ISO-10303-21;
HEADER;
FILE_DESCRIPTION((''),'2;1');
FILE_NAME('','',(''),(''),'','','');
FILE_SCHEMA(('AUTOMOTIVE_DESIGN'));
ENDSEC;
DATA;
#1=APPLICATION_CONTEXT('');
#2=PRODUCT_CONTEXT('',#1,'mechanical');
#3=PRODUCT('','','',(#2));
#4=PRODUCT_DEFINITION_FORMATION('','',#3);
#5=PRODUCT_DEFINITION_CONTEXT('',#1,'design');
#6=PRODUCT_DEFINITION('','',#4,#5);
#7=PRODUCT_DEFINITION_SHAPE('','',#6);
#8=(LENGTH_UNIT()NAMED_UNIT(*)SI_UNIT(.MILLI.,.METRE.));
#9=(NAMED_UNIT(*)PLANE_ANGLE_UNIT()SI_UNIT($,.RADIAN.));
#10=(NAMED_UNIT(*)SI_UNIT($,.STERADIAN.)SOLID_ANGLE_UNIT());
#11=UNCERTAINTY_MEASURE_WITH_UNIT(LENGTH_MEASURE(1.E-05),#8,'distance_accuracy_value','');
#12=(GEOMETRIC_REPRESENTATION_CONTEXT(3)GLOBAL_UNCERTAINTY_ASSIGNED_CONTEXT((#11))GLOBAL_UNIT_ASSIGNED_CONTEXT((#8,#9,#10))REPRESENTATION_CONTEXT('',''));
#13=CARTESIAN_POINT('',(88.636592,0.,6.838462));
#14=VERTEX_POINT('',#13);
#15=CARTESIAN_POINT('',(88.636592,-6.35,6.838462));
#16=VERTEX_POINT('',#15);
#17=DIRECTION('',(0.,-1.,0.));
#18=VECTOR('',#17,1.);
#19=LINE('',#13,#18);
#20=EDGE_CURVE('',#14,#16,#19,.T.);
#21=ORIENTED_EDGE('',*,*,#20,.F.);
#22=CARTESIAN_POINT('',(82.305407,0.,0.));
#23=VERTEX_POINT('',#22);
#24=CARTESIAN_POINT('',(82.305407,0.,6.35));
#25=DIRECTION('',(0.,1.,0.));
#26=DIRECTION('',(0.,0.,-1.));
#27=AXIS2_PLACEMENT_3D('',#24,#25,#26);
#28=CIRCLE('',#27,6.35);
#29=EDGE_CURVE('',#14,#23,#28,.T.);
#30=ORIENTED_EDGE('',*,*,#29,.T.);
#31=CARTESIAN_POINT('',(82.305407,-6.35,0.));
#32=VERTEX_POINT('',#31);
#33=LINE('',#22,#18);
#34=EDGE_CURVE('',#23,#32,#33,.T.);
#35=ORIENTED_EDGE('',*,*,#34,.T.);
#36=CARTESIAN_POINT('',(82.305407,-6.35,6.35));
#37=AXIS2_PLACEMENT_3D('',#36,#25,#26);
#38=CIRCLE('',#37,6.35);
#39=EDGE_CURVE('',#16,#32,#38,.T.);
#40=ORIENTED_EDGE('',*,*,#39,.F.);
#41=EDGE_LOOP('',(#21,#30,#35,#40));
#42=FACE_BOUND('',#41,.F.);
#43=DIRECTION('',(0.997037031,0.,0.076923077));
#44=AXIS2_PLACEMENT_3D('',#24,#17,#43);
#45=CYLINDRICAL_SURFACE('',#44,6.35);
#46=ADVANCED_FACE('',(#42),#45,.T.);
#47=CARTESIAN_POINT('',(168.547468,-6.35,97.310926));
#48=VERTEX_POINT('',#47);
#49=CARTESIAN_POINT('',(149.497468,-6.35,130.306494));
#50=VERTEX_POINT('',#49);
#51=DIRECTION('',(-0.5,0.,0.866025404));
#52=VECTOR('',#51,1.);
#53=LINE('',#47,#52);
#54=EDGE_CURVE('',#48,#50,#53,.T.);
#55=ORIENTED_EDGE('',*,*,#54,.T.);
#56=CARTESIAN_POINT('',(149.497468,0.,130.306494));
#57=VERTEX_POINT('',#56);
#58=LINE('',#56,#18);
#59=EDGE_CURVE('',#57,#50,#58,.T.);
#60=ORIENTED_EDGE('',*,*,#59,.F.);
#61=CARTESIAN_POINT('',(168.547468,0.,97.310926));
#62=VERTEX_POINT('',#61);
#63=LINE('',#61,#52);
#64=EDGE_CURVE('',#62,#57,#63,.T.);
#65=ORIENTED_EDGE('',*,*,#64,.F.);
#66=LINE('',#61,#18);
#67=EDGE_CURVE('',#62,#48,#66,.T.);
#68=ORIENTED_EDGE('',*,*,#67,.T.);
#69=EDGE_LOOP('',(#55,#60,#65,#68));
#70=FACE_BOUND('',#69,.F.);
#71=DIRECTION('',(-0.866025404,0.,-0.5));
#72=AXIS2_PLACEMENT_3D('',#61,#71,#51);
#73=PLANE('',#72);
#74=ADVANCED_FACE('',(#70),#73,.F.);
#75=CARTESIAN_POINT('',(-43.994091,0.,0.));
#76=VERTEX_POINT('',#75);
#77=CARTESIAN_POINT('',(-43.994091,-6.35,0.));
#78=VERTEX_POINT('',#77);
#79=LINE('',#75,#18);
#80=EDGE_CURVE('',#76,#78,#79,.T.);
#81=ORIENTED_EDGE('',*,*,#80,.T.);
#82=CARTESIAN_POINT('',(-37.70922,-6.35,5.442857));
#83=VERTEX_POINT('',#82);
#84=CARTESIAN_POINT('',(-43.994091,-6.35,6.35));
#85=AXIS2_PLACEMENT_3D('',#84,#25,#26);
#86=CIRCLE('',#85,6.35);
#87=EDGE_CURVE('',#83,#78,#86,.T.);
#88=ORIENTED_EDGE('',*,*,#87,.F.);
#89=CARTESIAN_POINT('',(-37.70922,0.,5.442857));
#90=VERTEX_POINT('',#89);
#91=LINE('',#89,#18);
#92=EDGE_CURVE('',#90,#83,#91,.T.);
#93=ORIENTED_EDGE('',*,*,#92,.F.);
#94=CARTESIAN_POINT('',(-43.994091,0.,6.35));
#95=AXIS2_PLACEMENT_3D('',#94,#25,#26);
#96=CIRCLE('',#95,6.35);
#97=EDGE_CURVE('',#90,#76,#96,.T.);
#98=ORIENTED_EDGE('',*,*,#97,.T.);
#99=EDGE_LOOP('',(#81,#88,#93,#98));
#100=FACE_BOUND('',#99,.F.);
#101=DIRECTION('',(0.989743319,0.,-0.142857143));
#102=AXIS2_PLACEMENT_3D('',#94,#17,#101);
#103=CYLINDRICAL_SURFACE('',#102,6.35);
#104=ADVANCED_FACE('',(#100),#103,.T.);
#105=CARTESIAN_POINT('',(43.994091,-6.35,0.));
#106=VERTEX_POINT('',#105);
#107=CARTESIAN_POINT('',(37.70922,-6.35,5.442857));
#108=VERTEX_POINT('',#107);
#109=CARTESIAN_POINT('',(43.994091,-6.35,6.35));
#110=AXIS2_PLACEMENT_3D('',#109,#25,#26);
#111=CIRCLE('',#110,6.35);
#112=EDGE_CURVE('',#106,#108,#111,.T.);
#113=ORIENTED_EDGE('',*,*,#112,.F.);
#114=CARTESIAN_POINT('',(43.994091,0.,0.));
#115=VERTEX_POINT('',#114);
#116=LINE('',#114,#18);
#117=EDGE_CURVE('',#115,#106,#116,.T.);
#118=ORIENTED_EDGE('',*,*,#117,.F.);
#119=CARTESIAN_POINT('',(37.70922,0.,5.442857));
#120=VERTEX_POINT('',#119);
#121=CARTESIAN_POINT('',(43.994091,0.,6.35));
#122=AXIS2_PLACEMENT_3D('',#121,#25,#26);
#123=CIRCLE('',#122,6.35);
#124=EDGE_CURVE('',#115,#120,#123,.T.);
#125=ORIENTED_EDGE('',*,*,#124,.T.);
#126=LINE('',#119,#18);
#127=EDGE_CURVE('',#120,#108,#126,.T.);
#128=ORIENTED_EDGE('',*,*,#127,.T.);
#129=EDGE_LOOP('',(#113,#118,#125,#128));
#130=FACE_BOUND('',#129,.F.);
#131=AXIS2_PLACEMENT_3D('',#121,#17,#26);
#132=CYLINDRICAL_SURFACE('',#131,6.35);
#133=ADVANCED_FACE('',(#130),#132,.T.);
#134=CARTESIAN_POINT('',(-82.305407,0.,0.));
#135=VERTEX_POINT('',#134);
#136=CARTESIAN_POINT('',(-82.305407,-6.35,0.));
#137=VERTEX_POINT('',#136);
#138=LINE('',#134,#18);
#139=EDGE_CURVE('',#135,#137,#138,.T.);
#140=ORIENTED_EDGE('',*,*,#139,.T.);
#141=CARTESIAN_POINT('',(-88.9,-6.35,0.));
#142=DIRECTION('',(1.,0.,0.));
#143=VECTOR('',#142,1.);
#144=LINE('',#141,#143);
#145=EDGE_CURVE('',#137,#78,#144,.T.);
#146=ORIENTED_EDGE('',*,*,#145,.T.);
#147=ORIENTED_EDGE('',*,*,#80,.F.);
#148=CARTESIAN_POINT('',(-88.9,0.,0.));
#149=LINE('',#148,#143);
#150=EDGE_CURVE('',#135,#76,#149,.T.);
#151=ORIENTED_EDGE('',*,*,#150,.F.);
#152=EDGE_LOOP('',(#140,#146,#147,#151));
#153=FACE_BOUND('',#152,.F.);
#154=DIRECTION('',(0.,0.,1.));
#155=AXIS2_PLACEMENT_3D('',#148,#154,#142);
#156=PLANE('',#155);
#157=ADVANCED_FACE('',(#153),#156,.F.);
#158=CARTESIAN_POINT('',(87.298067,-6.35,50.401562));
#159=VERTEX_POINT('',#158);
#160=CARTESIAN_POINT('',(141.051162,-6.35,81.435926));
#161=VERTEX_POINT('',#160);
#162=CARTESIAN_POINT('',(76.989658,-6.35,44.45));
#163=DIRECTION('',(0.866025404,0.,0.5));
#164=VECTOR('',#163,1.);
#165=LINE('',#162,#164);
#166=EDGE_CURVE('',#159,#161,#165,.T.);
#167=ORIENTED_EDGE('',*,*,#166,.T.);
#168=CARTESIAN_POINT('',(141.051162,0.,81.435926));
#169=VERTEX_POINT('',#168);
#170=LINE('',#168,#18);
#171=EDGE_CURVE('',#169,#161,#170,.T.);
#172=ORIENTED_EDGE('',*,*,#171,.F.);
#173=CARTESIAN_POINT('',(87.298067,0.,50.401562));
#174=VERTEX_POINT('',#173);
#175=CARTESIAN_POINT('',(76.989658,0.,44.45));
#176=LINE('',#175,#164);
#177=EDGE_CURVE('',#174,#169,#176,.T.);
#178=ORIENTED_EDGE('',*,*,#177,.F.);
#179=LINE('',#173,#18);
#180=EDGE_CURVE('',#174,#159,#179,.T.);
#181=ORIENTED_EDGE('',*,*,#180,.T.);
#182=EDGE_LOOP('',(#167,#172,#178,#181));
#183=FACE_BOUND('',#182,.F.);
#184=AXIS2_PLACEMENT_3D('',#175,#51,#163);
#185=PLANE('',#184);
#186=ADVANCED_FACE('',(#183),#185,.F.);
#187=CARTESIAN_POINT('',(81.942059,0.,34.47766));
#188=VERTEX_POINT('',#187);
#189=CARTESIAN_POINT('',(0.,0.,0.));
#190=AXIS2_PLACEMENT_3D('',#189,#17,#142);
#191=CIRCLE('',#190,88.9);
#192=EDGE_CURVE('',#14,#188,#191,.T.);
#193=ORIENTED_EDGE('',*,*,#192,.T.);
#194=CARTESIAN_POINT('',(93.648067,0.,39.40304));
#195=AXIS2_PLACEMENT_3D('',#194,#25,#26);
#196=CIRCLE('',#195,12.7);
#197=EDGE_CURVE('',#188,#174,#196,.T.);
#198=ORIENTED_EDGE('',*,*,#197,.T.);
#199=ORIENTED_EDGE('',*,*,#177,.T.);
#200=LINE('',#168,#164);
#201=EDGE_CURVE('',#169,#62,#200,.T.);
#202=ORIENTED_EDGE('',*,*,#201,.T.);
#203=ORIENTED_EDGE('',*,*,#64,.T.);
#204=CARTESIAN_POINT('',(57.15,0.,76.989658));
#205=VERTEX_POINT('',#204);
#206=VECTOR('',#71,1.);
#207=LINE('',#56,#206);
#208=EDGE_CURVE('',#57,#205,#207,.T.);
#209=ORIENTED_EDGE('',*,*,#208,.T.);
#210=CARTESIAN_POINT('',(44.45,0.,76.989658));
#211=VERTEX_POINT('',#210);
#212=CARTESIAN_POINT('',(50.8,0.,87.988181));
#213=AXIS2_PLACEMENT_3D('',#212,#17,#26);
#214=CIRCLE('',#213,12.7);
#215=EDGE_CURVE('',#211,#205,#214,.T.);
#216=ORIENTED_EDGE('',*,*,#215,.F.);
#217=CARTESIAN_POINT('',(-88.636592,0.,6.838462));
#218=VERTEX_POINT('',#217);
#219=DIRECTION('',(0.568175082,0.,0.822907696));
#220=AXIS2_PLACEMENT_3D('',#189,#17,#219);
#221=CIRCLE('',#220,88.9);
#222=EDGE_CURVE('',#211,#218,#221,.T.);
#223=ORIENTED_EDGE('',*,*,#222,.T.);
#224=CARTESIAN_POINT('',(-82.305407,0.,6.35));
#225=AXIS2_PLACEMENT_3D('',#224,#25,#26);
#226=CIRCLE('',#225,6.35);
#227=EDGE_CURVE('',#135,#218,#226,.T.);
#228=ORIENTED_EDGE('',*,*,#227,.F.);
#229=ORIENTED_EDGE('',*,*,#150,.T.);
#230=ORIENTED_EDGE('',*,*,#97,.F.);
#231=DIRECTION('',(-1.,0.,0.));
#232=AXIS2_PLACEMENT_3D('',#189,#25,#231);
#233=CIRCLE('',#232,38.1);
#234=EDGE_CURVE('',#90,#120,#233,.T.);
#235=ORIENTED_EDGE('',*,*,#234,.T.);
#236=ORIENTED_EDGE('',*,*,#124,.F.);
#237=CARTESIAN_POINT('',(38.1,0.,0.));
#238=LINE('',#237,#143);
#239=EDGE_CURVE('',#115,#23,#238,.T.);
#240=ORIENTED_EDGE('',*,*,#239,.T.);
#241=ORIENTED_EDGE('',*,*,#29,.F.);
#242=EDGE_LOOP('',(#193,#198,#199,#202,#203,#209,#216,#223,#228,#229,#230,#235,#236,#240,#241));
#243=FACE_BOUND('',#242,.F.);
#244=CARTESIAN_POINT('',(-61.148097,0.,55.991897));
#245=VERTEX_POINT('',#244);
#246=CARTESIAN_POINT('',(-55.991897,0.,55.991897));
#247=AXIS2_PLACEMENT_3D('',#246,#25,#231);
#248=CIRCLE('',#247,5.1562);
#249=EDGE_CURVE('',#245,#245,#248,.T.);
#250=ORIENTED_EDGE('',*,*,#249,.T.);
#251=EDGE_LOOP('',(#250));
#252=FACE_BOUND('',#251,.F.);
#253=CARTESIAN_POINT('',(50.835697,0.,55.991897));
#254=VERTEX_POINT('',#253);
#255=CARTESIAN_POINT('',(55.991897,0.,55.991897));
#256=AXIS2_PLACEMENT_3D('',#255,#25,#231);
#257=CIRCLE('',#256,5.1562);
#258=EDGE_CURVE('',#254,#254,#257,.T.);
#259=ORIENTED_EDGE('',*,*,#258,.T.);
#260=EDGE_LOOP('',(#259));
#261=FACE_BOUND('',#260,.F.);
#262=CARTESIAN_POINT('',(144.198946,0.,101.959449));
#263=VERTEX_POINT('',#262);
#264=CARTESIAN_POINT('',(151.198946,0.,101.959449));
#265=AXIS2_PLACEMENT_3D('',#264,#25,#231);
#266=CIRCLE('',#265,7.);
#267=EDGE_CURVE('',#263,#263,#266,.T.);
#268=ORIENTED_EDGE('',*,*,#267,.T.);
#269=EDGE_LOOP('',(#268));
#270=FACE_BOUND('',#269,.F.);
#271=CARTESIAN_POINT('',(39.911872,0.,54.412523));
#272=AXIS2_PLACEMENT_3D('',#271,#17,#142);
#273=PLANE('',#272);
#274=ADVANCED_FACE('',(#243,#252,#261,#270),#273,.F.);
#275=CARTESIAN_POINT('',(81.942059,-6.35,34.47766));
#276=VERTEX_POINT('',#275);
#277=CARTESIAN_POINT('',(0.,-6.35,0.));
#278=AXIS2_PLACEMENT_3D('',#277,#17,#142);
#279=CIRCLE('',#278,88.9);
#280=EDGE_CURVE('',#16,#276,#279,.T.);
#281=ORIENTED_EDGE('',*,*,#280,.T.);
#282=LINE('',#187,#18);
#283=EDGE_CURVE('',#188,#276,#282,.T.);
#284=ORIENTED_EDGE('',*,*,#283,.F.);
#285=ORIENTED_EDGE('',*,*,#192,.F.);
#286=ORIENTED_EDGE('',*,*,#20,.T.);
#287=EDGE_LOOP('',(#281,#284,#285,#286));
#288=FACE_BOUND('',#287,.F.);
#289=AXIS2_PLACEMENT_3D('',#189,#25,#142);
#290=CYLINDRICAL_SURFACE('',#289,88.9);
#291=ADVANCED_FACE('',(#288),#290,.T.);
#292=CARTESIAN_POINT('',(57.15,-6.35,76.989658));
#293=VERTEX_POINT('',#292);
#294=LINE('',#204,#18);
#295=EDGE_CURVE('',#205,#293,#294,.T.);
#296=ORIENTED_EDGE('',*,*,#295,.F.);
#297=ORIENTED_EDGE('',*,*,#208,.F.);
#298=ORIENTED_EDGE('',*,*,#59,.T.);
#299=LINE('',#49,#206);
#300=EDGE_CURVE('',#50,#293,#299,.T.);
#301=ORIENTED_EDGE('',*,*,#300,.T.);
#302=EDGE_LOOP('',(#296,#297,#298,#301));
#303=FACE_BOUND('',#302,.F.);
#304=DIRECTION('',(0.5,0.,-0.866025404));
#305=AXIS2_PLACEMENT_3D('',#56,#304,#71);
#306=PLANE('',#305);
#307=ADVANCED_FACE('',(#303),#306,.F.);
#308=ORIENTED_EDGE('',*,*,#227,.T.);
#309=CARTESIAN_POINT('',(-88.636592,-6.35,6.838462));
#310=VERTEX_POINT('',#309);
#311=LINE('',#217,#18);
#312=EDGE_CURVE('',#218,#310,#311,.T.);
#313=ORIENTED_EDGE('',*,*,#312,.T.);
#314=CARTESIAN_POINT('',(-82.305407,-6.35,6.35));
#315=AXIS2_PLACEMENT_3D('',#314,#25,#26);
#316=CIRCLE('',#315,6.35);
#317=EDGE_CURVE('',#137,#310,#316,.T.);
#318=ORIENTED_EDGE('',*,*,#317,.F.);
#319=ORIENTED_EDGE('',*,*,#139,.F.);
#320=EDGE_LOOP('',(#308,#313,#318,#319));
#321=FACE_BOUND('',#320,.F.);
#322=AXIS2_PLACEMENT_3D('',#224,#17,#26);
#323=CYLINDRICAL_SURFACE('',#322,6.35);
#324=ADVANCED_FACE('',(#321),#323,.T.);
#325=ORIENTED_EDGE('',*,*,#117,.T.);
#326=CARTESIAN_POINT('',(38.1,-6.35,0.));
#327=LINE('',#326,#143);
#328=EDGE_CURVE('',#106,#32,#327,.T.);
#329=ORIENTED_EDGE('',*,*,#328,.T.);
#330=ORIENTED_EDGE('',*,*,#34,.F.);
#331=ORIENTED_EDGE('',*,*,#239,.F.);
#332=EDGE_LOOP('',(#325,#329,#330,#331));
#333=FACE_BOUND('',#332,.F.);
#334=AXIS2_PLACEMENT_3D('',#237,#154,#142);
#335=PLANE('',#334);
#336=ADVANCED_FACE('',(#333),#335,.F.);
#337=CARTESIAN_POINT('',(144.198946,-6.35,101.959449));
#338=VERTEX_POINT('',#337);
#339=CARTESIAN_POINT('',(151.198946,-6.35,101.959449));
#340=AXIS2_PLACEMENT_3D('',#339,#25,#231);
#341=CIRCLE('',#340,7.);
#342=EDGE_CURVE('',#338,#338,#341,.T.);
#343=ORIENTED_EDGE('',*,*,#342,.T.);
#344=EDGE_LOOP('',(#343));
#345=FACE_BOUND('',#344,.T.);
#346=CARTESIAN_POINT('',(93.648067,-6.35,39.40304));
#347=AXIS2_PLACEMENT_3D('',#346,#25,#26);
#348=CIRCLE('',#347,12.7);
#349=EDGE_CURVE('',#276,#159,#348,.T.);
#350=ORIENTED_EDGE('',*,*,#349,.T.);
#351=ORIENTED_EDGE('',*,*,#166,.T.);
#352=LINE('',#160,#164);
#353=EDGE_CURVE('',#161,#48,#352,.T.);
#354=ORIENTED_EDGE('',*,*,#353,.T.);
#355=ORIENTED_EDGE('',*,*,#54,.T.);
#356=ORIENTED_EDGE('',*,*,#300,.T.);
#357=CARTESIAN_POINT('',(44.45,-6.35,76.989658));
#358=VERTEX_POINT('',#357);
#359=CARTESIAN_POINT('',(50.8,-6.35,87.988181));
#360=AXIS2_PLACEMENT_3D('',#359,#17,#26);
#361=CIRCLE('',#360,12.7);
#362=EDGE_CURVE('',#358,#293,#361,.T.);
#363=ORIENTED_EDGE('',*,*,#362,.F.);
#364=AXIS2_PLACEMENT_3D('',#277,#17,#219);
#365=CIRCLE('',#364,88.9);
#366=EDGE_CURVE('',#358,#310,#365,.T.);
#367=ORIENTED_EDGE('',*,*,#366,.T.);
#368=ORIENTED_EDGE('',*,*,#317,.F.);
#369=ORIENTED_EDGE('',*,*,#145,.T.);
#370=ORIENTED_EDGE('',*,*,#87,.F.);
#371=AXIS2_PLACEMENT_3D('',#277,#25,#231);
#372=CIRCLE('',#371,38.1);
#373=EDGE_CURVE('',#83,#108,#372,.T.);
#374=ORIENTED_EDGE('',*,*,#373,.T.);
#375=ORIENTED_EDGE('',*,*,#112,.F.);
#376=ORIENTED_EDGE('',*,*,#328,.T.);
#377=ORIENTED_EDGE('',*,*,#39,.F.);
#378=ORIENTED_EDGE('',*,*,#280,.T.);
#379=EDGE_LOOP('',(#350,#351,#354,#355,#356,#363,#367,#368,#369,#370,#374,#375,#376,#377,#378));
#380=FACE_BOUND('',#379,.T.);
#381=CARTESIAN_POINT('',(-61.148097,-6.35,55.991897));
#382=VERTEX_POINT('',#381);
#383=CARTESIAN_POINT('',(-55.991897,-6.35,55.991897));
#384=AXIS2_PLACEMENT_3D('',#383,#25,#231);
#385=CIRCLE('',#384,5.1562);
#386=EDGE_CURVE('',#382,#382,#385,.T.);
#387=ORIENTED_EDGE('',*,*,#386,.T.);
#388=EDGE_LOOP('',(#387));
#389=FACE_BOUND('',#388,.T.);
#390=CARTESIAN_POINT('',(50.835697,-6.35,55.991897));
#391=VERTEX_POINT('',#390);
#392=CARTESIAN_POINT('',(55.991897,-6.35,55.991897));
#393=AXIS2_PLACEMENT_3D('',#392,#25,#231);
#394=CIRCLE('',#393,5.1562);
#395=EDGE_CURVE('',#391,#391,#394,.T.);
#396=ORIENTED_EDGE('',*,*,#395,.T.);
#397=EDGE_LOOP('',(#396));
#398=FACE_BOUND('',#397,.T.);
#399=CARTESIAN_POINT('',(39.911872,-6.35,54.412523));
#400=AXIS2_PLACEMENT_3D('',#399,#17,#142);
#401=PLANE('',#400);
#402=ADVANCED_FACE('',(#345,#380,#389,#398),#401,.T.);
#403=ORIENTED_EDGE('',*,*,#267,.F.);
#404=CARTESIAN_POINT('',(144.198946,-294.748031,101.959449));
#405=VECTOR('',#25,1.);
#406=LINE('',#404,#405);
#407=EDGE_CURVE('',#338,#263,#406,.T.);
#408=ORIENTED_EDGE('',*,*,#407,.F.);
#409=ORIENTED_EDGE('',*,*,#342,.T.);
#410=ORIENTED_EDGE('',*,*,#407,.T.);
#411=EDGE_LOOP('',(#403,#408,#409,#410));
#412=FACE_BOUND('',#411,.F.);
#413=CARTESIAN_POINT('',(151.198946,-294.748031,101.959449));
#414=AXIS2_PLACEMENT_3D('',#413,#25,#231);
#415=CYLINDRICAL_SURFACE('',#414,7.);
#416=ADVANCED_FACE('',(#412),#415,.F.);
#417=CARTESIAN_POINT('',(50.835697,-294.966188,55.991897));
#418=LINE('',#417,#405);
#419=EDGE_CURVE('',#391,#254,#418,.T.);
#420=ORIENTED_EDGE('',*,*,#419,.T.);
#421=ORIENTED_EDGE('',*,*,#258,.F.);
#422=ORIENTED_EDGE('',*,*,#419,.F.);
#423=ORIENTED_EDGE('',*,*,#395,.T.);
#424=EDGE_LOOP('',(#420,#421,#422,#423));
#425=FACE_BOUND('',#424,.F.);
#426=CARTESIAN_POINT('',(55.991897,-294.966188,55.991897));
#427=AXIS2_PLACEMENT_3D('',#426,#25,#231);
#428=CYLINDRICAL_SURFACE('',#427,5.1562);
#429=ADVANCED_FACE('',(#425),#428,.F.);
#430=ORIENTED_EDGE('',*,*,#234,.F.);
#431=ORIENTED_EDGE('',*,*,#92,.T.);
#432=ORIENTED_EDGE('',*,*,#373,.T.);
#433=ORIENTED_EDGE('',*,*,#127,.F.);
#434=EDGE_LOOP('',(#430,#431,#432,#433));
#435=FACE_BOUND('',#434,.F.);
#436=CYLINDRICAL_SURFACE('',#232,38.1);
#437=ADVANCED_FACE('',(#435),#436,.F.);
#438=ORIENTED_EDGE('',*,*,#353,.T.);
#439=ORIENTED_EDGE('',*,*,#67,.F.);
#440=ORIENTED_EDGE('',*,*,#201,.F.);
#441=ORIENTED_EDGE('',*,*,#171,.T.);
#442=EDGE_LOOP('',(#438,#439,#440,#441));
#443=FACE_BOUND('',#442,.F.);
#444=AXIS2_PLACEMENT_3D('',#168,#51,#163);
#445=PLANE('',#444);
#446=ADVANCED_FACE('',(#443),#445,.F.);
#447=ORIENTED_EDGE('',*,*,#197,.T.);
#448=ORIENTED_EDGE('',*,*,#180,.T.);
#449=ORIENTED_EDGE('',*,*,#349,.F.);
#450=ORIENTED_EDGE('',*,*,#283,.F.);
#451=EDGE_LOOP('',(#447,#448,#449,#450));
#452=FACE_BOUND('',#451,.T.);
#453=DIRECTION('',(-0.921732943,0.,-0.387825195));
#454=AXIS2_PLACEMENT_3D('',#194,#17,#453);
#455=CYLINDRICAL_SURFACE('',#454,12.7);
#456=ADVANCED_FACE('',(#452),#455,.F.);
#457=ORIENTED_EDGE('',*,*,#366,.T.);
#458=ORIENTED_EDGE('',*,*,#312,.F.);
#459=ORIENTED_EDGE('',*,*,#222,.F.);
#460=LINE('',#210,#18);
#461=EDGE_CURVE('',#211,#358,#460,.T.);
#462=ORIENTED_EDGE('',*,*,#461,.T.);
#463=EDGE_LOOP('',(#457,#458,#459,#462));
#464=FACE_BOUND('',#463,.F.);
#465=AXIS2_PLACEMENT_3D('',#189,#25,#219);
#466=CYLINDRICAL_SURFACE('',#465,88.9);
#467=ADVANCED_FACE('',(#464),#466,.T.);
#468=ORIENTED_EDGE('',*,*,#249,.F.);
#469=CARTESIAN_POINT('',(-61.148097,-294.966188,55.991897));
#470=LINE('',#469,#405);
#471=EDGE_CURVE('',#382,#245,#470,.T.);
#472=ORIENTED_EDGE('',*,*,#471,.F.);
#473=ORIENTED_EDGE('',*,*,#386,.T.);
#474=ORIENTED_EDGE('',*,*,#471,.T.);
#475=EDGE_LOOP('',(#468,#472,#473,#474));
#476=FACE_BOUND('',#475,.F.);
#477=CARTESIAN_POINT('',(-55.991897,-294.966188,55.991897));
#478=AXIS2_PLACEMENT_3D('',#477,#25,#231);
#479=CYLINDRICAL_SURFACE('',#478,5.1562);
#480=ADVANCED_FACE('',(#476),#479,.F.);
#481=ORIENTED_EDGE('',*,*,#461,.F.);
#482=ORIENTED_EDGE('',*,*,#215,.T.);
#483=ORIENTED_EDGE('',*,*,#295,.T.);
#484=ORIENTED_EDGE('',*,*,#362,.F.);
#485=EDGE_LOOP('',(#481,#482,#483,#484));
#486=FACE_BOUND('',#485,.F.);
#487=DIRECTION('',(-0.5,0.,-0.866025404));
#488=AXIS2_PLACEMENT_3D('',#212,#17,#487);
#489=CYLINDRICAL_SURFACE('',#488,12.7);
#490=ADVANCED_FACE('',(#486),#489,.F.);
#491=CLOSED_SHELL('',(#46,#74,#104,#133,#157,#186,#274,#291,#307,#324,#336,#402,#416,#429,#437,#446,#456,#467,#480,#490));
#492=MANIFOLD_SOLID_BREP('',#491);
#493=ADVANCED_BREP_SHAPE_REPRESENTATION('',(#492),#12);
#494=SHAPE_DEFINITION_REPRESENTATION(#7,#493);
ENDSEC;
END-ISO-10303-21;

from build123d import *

# Parameters (mm, degrees)
F1_DEPTH = 6.35
F3_D     = 10.3124
F4_R     = 12.7
F5_R     = 6.35
F7_D     = 14


# Not quite as in the source:
# - a feature names something its author has since deleted; it is built from what else it names


with BuildPart() as f1:
    # F0 (on Front) → F1 (new body)
    with BuildSketch(Plane.XZ):
        with BuildLine():
            Line((38.1, 0), (88.9, 0))
            ThreePointArc((88.9, 0), (85.8708059571, 23.0090131096), (76.9896583964, 44.45))
            Line((76.9896583964, 44.45), (141.0511618856, 81.4359262841))
            Line((141.0511618856, 81.4359262841), (168.5474684557, 97.3109262841))
            Line((168.5474684557, 97.3109262841), (149.4974684557, 130.3064941683))
            Line((149.4974684557, 130.3064941683), (122.0011618856, 114.4314941683))
            Line((122.0011618856, 114.4314941683), (50.5107648032, 73.1564941683))
            ThreePointArc((50.5107648032, 73.1564941683), (-41.3086129578, 78.7198100576), (-88.9, 0))
            Line((-88.9, 0), (-38.1, 0))
            ThreePointArc((-38.1, 0), (0, 38.1), (38.1, 0))
        make_face()
    extrude(amount=F1_DEPTH)

    # F3 (through all)
    with Locations(Plane.XZ.offset(6.35)):
        with Locations((-55.9918969149, 55.9918969149), (55.9918969149, 55.9918969149)):
            Hole(F3_D / 2)

    # F4
    f4_edges = [f1.edges().sort_by_distance(p)[0] for p in [
        (50.510765, -3.175, 73.156494),
        (76.989658, -3.175, 44.45),
    ]]
    fillet(f4_edges, radius=F4_R)

    # F5
    f5_edges = [f1.edges().sort_by_distance(p)[0] for p in [
        (88.9, -3.175, 0),
        (38.1, -3.175, 0),
        (-38.1, -3.175, 0),
        (-88.9, -3.175, 0),
    ]]
    fillet(f5_edges, radius=F5_R)

    # F7 (through all)
    with Locations(Plane.XZ.offset(6.35)):
        with Locations((151.1989458277, 101.9594489122)):
            Hole(F7_D / 2)


solid = f1.part
